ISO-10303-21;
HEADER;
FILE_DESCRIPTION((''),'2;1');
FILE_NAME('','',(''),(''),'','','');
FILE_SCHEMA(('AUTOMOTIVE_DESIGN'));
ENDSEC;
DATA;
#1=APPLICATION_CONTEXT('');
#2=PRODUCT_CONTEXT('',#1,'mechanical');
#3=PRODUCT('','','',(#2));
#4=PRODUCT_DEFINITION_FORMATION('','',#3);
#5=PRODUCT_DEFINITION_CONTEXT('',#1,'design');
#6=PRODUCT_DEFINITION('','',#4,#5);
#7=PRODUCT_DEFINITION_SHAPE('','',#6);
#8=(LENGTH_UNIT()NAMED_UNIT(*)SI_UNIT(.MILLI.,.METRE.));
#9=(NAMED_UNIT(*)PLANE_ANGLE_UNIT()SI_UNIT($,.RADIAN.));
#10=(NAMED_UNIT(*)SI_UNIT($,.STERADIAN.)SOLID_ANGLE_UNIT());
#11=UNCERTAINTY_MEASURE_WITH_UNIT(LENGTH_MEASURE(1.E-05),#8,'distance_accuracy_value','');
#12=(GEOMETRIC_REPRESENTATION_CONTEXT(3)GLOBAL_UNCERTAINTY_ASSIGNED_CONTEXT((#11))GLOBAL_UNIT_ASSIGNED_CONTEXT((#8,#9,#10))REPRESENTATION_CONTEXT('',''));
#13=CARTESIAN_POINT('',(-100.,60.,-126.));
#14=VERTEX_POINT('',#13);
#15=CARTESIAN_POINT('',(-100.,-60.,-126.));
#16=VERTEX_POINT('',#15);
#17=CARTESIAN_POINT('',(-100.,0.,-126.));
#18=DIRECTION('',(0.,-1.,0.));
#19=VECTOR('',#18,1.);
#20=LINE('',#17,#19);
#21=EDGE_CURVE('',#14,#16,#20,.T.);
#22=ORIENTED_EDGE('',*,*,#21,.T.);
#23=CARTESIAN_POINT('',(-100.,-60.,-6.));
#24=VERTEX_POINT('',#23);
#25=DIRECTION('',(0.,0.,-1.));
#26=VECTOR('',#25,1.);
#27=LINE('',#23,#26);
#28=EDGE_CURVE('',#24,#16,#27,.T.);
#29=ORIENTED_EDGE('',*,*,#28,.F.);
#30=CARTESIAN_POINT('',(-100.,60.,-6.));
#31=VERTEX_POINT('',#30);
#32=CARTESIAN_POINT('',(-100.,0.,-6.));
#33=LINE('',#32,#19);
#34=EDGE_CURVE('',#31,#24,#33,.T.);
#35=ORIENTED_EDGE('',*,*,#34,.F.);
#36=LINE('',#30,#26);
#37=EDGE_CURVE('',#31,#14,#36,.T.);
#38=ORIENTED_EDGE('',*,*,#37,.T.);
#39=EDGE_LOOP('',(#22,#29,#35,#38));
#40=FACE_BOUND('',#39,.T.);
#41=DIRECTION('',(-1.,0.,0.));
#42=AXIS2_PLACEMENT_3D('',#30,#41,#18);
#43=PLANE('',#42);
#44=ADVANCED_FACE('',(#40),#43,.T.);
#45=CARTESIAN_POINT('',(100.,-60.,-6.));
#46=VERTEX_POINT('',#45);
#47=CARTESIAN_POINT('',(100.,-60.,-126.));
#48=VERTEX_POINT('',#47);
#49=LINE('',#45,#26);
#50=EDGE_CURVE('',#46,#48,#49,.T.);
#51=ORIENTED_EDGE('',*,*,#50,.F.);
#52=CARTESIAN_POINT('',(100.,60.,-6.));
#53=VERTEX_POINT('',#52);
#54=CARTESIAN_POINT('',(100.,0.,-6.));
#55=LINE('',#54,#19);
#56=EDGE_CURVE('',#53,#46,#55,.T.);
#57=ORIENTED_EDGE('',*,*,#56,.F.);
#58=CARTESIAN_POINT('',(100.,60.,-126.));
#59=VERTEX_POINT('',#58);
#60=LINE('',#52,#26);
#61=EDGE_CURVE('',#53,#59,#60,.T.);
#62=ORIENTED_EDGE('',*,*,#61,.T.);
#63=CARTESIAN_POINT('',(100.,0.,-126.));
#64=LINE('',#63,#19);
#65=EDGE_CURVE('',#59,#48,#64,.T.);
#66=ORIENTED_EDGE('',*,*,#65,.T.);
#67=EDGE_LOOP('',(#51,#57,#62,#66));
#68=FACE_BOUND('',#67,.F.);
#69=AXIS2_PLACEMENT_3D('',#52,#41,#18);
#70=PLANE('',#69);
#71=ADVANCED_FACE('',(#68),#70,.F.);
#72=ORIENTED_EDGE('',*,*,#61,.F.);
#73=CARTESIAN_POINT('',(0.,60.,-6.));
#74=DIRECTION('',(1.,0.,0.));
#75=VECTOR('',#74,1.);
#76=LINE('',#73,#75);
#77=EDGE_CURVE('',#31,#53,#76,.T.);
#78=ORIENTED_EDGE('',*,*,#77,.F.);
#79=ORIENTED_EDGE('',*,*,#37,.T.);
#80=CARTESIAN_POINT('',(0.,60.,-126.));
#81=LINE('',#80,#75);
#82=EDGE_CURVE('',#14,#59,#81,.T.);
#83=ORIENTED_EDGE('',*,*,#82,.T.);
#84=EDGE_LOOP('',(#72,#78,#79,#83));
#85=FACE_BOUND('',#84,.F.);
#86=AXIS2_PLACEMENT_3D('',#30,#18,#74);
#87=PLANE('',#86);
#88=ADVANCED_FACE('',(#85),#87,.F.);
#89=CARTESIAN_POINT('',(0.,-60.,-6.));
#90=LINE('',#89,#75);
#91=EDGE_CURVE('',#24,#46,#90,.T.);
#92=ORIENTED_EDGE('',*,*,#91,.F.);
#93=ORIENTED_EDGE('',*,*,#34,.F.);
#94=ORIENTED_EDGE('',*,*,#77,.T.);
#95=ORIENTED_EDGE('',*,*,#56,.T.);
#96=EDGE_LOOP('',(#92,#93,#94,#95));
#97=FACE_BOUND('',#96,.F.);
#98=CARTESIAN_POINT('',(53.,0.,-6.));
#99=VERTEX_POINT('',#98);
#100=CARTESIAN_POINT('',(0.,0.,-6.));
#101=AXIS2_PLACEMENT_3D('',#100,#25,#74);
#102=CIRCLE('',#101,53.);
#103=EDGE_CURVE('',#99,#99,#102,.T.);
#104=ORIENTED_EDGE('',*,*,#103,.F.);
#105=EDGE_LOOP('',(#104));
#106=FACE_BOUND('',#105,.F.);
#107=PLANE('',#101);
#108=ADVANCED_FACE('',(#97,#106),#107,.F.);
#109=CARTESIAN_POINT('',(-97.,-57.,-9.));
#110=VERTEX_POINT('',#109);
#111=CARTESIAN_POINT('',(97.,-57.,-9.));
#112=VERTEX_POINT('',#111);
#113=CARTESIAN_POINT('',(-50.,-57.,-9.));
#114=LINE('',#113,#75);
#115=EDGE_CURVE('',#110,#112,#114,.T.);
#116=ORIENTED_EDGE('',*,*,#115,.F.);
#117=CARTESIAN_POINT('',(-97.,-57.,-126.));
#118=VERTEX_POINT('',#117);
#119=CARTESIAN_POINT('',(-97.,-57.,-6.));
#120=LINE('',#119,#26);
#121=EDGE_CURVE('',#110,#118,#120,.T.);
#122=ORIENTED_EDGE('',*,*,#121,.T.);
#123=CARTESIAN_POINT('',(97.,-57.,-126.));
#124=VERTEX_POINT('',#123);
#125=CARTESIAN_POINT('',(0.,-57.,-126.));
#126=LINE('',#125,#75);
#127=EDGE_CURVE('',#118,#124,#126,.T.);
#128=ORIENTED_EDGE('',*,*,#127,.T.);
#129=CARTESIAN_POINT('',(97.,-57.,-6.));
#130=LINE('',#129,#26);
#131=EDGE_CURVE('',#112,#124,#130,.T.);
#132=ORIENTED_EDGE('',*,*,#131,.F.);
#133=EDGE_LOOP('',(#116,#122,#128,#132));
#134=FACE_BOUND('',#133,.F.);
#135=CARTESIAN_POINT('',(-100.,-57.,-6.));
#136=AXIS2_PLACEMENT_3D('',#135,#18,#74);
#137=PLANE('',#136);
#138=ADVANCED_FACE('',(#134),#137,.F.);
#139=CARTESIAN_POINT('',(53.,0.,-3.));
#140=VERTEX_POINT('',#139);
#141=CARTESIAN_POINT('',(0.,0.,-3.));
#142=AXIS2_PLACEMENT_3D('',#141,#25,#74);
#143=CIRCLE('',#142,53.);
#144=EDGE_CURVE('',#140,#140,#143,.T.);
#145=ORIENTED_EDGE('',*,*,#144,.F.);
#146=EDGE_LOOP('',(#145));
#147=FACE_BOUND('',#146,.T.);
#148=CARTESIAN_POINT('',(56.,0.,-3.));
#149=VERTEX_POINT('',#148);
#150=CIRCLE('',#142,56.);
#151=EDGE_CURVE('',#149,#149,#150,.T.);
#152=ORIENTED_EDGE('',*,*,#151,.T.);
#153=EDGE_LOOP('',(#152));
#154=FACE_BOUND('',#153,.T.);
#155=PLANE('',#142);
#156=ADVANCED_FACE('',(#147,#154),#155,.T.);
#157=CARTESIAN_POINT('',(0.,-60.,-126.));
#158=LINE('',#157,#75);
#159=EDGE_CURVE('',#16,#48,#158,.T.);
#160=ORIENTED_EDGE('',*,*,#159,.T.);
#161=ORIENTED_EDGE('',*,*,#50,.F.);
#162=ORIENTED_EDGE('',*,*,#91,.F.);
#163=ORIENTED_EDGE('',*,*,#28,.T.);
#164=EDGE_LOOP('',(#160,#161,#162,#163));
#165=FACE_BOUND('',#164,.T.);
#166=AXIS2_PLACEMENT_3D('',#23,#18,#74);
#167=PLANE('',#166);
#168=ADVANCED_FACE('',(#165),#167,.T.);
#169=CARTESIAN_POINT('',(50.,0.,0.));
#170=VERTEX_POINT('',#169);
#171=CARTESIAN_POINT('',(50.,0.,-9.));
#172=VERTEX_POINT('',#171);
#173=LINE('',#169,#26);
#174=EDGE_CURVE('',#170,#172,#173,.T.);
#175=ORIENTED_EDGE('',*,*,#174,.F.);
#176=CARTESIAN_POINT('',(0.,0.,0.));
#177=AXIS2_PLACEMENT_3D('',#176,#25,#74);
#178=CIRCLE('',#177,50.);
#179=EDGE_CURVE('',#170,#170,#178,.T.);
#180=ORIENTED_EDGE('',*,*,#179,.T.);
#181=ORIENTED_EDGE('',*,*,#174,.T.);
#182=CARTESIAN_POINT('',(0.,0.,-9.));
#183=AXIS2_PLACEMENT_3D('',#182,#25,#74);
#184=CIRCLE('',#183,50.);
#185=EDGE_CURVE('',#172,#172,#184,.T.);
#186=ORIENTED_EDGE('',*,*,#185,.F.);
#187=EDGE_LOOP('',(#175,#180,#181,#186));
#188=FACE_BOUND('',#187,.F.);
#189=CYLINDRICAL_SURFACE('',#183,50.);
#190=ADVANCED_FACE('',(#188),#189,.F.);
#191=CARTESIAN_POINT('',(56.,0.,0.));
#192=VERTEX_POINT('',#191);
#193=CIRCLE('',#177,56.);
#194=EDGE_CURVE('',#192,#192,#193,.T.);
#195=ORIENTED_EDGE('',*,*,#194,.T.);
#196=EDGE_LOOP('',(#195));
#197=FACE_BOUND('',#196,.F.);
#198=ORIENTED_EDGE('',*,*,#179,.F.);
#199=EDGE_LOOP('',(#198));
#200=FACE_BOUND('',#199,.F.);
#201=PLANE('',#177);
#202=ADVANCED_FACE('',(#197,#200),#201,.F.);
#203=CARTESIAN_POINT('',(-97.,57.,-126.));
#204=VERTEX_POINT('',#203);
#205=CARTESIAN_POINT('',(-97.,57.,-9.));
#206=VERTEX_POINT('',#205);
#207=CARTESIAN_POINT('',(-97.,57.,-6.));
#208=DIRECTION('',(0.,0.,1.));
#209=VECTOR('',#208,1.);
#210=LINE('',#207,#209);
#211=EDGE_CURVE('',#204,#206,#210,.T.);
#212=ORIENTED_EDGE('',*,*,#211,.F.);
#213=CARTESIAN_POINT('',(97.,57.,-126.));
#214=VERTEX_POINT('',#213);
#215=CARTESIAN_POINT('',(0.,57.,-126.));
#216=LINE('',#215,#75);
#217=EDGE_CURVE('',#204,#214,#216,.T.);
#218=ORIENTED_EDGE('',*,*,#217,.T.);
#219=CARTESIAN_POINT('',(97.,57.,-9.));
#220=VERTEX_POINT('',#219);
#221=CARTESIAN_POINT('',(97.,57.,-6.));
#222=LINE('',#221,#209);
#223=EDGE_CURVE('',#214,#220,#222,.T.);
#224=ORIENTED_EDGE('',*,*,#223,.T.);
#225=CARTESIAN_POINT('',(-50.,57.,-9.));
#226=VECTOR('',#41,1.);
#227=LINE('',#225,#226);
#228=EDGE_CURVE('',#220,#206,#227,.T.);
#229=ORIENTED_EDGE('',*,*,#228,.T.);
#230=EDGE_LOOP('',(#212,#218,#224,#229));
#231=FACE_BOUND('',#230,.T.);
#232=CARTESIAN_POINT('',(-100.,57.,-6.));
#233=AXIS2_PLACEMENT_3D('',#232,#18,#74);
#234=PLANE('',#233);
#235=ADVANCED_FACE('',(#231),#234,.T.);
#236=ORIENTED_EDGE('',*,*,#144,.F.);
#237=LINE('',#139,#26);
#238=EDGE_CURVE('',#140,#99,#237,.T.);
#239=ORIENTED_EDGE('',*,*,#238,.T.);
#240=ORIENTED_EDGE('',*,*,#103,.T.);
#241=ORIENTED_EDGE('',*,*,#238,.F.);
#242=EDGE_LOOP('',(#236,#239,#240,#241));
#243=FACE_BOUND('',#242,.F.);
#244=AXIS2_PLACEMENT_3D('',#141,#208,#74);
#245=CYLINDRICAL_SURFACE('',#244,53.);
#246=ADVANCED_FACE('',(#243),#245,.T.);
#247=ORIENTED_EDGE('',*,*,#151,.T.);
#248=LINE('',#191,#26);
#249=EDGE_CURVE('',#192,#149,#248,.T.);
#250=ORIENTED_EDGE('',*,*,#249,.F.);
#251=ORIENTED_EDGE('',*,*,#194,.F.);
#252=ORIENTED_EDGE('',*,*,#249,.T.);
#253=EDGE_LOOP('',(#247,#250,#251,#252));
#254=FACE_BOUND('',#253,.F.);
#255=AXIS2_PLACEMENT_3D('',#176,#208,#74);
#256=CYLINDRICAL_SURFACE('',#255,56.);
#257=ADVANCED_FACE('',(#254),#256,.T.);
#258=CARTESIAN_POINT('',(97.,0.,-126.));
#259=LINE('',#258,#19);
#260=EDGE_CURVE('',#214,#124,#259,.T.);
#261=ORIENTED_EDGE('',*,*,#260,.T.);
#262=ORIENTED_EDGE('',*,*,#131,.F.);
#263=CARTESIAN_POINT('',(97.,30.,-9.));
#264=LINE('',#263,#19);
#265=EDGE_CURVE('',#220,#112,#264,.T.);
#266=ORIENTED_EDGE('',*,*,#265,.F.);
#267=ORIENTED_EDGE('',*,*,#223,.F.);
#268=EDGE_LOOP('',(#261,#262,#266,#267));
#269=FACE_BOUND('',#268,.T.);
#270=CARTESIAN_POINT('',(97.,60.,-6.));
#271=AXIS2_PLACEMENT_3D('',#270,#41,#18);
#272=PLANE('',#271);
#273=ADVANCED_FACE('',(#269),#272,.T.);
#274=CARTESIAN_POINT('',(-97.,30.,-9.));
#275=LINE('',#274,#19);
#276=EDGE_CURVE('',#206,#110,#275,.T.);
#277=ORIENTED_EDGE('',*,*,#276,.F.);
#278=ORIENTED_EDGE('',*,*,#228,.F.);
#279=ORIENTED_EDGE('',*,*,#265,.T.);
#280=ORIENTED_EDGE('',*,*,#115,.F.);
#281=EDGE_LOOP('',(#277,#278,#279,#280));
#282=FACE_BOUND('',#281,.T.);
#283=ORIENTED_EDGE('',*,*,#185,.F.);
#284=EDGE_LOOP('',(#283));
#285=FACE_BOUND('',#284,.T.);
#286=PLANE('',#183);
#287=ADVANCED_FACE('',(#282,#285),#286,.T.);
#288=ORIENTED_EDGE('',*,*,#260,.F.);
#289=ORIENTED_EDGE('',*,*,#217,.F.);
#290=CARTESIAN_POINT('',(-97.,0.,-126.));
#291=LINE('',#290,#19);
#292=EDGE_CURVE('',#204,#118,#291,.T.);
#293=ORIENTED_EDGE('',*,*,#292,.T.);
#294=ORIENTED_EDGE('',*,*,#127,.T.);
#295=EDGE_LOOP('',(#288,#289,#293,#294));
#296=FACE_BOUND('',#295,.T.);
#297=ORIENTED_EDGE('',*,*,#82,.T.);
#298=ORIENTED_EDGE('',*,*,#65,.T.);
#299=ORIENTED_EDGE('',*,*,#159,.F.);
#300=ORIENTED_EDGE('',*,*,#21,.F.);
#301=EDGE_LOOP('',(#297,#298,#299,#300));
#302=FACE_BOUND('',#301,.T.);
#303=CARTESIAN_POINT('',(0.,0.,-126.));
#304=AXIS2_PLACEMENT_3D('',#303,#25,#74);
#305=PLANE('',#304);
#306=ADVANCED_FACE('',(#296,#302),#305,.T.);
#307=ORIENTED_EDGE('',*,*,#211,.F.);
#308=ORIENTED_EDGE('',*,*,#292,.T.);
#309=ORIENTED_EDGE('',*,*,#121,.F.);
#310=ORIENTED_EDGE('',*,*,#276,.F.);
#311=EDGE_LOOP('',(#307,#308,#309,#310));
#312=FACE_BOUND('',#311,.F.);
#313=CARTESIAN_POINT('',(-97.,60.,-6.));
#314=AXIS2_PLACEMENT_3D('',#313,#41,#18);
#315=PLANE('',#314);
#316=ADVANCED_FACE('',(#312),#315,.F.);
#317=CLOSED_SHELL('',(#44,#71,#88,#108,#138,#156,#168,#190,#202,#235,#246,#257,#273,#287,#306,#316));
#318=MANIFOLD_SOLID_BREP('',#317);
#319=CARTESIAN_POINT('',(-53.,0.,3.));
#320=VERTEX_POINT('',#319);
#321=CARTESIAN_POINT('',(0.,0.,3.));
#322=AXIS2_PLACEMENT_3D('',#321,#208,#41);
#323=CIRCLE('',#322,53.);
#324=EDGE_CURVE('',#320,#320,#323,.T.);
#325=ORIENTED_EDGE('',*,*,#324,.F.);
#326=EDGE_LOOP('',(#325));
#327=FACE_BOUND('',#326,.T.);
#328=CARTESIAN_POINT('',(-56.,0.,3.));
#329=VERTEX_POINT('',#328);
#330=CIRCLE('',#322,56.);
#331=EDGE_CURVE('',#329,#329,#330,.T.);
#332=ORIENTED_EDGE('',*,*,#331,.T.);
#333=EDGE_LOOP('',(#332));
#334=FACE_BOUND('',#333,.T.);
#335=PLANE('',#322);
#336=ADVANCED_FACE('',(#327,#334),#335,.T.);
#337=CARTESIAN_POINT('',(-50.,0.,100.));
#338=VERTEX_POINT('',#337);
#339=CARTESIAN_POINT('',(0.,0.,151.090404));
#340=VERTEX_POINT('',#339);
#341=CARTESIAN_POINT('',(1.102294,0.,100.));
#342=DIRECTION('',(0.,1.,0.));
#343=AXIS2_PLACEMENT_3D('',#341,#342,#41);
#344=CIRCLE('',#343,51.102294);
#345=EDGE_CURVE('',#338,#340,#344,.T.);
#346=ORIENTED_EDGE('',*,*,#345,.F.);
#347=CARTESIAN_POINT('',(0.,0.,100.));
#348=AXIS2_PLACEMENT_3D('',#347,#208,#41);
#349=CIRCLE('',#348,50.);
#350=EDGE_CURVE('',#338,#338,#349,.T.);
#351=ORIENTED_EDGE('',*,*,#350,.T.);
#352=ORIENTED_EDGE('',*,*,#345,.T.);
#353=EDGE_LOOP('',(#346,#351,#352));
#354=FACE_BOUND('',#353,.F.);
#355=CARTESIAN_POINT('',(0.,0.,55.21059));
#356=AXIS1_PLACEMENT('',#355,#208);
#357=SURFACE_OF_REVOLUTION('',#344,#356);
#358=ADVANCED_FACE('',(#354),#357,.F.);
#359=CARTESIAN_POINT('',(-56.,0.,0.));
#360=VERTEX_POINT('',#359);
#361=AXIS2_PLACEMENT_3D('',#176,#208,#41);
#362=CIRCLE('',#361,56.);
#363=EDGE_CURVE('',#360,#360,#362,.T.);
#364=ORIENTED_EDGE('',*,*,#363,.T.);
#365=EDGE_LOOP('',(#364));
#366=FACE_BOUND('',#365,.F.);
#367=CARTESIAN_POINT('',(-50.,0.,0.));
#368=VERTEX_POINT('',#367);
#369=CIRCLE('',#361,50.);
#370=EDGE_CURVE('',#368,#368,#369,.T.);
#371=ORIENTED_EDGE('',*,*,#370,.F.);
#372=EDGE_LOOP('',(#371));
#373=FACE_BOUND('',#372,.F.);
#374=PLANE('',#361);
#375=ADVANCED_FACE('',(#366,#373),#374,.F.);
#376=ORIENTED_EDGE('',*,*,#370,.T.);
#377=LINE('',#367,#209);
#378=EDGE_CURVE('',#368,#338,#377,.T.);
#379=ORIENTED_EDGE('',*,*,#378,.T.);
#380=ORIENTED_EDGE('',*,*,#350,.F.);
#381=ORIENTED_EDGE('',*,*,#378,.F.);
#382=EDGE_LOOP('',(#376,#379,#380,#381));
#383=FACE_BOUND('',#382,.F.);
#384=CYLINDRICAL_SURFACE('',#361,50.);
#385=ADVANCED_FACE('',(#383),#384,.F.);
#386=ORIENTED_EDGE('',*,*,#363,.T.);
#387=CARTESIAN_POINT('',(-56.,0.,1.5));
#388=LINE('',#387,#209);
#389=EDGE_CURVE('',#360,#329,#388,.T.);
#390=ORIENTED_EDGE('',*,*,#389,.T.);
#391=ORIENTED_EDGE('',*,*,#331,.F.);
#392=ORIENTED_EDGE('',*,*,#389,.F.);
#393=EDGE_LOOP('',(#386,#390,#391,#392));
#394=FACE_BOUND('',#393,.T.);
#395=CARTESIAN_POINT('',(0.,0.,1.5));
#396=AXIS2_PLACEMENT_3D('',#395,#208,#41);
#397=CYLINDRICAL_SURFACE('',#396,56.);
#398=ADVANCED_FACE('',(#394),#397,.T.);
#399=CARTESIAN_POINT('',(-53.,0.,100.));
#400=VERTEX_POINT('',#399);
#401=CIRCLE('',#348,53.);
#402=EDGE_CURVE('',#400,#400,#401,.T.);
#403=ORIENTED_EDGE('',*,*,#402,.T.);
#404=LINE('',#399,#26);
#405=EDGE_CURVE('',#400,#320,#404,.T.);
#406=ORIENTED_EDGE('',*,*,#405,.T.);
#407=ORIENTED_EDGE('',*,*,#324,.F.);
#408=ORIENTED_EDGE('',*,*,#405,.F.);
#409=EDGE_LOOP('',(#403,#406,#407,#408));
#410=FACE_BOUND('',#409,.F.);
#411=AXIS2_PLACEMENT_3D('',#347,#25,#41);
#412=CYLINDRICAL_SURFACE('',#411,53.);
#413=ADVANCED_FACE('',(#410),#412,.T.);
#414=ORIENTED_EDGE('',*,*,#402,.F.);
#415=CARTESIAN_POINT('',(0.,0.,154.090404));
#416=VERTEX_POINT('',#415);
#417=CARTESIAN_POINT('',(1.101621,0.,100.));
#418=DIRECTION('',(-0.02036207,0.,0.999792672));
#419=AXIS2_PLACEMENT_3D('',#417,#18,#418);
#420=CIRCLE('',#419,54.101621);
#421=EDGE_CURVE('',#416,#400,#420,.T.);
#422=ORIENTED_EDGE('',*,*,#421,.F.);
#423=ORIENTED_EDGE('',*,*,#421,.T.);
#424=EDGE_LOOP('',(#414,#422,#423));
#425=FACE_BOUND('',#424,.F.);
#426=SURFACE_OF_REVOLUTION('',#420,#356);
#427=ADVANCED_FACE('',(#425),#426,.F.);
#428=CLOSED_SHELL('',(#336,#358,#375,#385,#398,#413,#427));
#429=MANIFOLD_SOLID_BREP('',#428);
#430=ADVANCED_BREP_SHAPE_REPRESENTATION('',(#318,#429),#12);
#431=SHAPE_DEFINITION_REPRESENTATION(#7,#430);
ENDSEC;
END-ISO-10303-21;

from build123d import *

# Parameters (mm, degrees)
F0_W      = 3
F0_H      = 3
F2_R      = 56
F2_R_2    = 50
F3_DEPTH  = 3
F4_R      = 53
F4_R_2    = 50
F5_DEPTH  = 3
F6_W      = 200
F6_H      = 120
F7_DEPTH  = 120
F8_T      = 3
F9_R      = 50
F10_DEPTH = 4


# Not quite as in the source:
# - a shell that OpenCascade refuses in one call is made with other operations: the cavity is built on its own and cut out


with BuildPart() as f1:
    # F0 (on Front) → F1 (revolve)
    with BuildSketch(Plane.XZ):
        with Locations((-54.5, 1.5)):
            Rectangle(F0_W, F0_H)
        Polygon((-53, 3), (-53, 0), (-50, 0), (-50, 100), (-53, 100), align=None)
        with BuildLine():
            Line((-53, 100), (-50, 100))
            ThreePointArc((-50, 100), (-35.4201251719, 135.7429342759), (0, 151.0904042125))
            Line((0, 151.0904042125), (0, 154.0904042125))
            ThreePointArc((0, 154.0904042125), (-37.5415211912, 137.8641381384), (-53, 100))
        make_face()
    revolve(axis=Axis((0, 0, 55.2105903625), (0, 0, 1)))


with BuildPart() as f3:
    # F2 (on face) → F3 (new body)
    with BuildSketch(Plane(origin=(0, 0, 0), x_dir=(1, 0, 0), z_dir=(0, 0, -1))):
        Circle(F2_R)
        Circle(F2_R_2, mode=Mode.SUBTRACT)
    extrude(amount=F3_DEPTH)

    # F4 (on face) → F5 (join)
    with BuildSketch(Plane(origin=(0, 0, -3), x_dir=(1, 0, 0), z_dir=(0, 0, -1))):
        Circle(F4_R)
        Circle(F4_R_2, mode=Mode.SUBTRACT)
    extrude(amount=F5_DEPTH)

    # F6 (on face) → F7 (join)
    with BuildSketch(Plane(origin=(0, 0, -6), x_dir=(1, 0, 0), z_dir=(0, 0, -1))):
        Rectangle(F6_W, F6_H)
    extrude(amount=F7_DEPTH)

    # F8: shell of thickness 3, made by hand


with BuildPart() as f8_core1:
    # F8_t2: copy of F3
    add(f3.part)

    # the walls: a layer under each face that stays
    f8_faces = [f8_core1.faces().sort_by_distance(p)[0] for p in [
        (0, -60, -66),
        (100, 0, -66),
        (-100, 0, -66),
        (-66.6666666667, 40, -6),
        (0, 60, -66),
        (-53, 0, -4.5),
        (-52.2666666667, 14.9333333333, -3),
        (-56, 0, -1.5),
        (-37.3333333333, 37.3333333333, 0),
        (-50, 0, -3),
        (0, 0, -6),
    ]]
    thicken(f8_faces, amount=-F8_T, mode=Mode.SUBTRACT)

    # F8_s3 → F8_t4 (revolve, cut)
    with BuildSketch(Plane.XZ):
        Polygon((53.03, -5.97), (53, -9), (50, -9), (50, -6), align=None)
    revolve(axis=Axis((0, 0, -6), (0, 0, -1)), mode=Mode.SUBTRACT)

    # F8_s5 → F8_t6 (revolve, cut)
    with BuildSketch(Plane.XZ):
        Polygon((53.03, -3.03), (50, -3), (50, 0), (53, 0), align=None)
    revolve(axis=Axis((0, 0, -3), (0, 0, -1)), mode=Mode.SUBTRACT)

    # F8_s7 → F8_t8 (revolve, cut)
    with BuildSketch(Plane.XZ):
        Polygon((49.97, -5.97), (53, -6), (53, -9), (50, -9), align=None)
    revolve(axis=Axis((0, 0, -6), (0, 0, -1)), mode=Mode.SUBTRACT)


with BuildPart() as f3_1:
    add(f3.part)

    # what is left inside the walls is the cavity
    f8_cavity = [f8_core1.part.solids().sort_by_distance(p)[0] for p in [
        (0, -56.97, -87),
    ]]
    add(f8_cavity, mode=Mode.SUBTRACT)

    # F9 (on face) → F10 (cut)
    with BuildSketch(Plane(origin=(0, 0, -9), x_dir=(1, 0, 0), z_dir=(0, 0, -1))):
        Circle(F9_R)
    extrude(amount=-F10_DEPTH, mode=Mode.SUBTRACT)


solid = Compound([f1.part, f3_1.part])
